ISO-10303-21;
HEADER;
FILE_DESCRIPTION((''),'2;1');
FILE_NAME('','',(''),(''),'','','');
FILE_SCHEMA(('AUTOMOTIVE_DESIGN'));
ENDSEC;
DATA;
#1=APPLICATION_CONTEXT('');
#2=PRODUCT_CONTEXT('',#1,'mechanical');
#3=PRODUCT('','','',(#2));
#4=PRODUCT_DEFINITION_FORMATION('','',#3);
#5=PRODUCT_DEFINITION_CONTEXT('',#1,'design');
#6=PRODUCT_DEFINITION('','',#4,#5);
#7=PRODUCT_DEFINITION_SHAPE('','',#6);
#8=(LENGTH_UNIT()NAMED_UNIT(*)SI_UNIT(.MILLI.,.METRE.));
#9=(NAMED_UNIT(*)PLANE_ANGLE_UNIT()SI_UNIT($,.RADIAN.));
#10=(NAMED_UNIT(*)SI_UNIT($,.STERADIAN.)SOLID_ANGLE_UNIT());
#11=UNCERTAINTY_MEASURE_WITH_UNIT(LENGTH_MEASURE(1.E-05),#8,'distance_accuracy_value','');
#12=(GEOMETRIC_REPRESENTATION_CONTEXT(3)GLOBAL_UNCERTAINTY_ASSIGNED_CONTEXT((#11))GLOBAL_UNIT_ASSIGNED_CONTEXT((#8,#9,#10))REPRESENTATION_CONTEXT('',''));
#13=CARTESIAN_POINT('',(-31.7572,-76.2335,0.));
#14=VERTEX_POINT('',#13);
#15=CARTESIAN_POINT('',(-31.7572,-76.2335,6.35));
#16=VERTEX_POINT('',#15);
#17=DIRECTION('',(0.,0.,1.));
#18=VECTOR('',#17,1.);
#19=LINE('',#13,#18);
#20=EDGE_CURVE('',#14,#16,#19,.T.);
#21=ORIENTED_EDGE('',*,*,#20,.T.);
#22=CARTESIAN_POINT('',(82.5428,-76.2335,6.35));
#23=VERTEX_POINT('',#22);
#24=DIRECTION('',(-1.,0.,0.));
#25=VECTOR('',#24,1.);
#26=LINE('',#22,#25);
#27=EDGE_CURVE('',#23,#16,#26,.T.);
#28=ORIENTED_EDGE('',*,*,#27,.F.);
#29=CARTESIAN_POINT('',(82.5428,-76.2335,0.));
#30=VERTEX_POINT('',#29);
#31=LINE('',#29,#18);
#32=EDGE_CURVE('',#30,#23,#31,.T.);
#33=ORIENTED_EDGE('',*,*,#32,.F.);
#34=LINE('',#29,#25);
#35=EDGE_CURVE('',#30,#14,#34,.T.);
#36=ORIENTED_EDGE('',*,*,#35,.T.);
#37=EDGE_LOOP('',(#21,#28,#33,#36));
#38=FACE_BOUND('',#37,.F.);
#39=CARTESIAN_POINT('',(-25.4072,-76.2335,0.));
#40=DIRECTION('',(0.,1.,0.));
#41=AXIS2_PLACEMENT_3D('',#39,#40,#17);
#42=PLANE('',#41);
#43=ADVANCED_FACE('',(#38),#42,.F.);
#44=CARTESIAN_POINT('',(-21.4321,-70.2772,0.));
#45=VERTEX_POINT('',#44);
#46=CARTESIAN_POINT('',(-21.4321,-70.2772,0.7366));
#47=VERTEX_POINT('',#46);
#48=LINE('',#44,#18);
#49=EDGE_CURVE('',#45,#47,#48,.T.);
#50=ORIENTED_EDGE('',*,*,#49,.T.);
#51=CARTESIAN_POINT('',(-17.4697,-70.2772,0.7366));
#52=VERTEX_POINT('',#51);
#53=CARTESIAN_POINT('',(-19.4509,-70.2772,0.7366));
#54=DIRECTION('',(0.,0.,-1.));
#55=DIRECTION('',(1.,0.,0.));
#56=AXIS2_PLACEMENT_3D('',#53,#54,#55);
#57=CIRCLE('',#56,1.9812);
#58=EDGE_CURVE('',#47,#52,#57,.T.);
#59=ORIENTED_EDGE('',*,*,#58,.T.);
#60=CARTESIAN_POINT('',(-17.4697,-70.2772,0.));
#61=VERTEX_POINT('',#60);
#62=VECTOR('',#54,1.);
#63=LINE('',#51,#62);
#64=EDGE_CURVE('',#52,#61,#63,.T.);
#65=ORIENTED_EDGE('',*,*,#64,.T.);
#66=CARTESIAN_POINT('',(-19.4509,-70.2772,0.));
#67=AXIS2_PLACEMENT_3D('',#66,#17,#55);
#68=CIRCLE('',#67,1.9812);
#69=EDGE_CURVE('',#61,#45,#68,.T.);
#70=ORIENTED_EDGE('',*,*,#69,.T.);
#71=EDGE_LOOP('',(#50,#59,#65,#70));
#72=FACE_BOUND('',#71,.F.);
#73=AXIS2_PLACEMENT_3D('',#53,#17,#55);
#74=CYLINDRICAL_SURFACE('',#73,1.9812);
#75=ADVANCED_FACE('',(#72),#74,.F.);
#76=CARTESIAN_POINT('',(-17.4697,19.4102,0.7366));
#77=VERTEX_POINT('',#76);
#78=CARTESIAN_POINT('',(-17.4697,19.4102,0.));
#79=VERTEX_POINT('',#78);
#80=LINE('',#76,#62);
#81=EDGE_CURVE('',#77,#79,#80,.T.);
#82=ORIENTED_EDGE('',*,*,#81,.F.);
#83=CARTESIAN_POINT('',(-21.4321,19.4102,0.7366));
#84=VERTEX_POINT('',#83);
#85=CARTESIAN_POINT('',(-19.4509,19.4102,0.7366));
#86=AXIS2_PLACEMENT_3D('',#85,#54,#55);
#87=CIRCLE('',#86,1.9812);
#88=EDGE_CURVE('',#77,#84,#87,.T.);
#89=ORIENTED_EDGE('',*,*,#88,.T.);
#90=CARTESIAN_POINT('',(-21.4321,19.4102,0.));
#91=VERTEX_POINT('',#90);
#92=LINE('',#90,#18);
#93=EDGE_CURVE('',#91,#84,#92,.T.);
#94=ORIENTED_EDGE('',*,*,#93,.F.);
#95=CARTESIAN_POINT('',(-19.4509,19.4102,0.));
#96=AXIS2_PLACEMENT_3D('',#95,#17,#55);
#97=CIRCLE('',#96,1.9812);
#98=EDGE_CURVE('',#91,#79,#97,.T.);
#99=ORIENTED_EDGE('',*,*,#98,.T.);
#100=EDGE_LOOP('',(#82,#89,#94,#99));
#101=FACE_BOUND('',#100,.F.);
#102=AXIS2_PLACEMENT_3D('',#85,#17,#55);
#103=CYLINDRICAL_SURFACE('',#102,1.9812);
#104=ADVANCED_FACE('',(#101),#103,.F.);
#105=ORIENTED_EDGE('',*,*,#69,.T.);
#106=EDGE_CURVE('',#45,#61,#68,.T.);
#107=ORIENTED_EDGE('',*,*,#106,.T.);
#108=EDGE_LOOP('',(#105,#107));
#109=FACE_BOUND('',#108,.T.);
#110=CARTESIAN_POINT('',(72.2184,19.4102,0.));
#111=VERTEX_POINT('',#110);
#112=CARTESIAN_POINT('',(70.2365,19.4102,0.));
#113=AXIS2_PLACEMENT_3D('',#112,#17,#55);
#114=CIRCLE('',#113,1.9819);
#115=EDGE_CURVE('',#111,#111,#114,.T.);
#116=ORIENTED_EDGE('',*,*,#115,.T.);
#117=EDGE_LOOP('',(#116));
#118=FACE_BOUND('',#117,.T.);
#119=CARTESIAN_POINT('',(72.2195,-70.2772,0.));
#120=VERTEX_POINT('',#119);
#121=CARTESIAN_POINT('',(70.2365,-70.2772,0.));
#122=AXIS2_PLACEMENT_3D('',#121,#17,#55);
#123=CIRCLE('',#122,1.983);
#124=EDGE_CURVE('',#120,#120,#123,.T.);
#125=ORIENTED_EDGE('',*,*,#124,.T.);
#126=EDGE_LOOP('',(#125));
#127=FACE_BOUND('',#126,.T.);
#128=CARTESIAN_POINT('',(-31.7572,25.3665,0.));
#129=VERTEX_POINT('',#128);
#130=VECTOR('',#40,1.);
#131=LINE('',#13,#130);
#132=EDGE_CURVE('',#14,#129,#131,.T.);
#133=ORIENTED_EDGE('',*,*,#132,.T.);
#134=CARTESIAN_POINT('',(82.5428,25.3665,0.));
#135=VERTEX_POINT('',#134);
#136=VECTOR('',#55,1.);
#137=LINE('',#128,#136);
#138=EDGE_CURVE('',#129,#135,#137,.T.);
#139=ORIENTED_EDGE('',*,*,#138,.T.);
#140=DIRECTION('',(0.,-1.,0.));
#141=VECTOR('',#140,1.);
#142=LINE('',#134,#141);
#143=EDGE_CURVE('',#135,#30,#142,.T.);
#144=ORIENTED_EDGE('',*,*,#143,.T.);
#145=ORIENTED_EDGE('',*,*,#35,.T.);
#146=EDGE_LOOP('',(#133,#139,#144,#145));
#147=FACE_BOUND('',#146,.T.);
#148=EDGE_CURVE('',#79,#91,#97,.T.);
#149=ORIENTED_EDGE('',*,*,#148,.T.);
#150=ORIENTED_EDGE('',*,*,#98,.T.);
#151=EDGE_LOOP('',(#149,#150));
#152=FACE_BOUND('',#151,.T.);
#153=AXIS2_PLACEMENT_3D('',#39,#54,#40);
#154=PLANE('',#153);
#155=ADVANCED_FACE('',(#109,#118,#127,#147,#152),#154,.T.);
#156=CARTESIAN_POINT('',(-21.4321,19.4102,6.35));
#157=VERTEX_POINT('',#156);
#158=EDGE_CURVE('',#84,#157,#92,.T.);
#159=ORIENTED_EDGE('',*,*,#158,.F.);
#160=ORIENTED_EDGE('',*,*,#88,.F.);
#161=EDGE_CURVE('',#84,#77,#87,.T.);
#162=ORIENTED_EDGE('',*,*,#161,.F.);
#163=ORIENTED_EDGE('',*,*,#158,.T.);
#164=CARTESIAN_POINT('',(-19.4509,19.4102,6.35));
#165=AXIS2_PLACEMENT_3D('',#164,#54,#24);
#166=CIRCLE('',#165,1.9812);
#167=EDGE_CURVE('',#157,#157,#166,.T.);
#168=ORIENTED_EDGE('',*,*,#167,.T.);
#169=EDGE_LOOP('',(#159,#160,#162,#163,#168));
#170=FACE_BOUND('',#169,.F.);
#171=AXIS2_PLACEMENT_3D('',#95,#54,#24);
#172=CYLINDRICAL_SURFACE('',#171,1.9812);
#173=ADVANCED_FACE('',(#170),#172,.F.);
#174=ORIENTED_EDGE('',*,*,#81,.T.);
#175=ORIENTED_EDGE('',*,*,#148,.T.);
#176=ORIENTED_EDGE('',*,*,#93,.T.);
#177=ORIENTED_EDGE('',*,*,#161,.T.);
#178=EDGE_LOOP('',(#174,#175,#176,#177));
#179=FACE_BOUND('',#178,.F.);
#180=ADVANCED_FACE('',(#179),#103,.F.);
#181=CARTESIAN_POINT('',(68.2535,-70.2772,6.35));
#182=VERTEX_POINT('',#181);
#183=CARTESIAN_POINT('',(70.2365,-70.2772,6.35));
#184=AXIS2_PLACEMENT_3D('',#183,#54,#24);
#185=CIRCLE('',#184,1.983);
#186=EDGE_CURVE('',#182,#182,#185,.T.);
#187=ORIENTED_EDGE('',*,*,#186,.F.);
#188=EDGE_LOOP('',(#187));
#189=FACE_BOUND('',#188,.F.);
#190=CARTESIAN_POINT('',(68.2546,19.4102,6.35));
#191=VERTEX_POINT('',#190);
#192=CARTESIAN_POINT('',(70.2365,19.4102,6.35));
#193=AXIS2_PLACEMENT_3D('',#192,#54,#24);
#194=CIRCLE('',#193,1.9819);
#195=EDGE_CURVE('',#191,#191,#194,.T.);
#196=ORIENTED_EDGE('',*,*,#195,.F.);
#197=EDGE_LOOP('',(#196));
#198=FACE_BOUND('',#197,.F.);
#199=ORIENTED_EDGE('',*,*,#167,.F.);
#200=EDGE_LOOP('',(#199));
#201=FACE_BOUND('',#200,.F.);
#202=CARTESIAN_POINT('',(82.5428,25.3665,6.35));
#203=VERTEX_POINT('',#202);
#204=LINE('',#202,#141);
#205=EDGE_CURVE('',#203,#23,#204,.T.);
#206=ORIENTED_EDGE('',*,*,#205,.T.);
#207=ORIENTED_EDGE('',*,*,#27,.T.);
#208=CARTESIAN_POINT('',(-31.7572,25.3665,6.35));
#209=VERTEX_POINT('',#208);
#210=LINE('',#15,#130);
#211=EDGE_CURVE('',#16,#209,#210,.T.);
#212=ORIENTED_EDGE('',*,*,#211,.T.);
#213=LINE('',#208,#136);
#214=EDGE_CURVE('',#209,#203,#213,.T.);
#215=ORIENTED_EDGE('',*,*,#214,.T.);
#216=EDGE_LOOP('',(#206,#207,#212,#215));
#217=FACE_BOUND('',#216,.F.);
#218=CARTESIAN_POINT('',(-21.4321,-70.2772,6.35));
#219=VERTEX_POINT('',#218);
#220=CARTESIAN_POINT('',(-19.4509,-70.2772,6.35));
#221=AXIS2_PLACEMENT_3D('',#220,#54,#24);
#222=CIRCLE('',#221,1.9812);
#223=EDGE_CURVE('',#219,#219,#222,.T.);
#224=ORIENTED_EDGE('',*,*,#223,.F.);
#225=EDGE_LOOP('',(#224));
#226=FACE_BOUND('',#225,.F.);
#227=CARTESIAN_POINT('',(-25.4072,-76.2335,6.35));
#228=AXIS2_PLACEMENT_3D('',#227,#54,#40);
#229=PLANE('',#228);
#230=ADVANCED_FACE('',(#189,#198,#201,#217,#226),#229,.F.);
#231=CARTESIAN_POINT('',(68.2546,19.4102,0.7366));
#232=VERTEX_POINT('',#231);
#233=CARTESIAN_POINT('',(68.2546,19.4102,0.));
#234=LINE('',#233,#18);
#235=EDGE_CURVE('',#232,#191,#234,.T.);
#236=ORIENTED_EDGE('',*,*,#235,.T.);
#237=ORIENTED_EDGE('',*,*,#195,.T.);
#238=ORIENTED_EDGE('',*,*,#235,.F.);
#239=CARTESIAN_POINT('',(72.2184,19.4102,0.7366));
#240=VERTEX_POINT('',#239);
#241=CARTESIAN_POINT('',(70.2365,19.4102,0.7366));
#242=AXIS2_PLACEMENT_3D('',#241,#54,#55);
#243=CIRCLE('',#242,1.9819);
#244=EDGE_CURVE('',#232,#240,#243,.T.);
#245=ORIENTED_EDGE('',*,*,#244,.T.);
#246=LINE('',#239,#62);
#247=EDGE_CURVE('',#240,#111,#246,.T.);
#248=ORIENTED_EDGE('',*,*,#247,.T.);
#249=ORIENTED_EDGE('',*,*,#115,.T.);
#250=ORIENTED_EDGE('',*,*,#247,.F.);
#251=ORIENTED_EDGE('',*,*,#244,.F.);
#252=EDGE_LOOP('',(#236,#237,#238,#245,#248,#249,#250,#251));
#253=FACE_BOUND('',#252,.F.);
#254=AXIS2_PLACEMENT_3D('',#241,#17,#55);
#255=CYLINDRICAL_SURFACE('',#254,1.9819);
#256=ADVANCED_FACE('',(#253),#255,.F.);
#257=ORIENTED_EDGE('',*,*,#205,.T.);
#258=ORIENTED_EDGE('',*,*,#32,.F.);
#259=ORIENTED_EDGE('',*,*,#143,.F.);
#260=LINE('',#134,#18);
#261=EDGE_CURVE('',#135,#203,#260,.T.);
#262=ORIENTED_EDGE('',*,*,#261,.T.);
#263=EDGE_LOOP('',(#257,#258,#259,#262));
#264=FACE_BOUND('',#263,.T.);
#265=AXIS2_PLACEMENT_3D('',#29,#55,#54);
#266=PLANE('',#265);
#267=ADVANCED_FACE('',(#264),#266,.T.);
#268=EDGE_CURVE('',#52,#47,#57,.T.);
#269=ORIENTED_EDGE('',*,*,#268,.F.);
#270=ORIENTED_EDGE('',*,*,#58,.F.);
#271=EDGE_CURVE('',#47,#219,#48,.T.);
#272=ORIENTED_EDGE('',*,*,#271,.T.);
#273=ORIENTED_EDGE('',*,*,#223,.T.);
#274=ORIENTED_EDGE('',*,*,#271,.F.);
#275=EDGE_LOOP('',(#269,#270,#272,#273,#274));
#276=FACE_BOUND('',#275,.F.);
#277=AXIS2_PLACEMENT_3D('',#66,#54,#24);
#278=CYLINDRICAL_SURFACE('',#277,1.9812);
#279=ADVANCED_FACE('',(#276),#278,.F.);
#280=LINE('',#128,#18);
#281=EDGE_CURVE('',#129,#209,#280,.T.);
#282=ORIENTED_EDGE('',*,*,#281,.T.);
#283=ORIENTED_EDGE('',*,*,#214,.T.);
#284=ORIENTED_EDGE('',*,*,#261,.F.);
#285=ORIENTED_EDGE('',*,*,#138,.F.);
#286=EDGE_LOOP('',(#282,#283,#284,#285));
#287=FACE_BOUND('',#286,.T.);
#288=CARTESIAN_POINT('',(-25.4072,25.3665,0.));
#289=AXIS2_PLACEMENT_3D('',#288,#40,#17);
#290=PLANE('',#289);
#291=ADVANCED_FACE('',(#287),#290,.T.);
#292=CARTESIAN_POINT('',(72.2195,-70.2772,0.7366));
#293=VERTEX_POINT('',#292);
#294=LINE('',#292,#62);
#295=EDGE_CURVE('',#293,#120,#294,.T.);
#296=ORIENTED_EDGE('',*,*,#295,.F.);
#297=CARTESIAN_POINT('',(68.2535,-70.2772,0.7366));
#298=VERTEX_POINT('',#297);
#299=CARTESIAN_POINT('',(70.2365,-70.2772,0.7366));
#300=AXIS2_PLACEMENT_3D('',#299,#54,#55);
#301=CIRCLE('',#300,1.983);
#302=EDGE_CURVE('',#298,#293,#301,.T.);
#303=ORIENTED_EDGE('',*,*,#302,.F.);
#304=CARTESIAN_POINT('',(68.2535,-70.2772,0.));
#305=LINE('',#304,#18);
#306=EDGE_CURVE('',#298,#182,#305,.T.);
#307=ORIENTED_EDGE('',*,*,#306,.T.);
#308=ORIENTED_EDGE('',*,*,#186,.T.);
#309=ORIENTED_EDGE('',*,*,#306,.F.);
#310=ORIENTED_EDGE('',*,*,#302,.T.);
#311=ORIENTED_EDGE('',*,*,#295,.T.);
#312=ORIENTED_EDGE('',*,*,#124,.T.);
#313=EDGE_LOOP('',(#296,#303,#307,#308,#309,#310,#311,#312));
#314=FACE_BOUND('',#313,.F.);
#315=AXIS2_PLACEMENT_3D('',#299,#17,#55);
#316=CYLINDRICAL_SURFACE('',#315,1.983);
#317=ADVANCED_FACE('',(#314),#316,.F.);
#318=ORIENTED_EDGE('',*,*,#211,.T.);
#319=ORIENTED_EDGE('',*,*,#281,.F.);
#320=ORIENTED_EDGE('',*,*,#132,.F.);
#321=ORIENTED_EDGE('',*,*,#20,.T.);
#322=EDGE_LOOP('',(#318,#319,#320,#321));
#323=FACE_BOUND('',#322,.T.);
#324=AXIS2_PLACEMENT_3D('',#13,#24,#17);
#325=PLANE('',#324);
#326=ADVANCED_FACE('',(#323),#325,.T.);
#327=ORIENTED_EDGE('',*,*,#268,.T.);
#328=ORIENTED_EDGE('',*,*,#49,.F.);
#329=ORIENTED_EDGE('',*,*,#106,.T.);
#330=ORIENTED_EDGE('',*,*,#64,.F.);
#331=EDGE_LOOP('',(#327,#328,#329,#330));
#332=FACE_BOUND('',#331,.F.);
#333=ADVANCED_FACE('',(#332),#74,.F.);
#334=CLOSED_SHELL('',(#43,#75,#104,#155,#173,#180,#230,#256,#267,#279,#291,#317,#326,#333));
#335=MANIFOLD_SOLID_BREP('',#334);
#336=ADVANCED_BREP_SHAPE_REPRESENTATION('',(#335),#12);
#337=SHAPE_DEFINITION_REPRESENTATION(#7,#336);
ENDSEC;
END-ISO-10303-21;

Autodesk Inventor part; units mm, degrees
ref_plane "YZ Plane" through (0, 0, 0) normal (1, 0, 0) x (0, 1, 0)
ref_plane "XZ Plane" through (0, 0, 0) normal (0, 1, 0) x (-1, 0, 0)
ref_plane "XY Plane" through (0, 0, 0) normal (0, 0, 1) x (1, 0, 0)
sketch "Sketch1" plane through (0, 0, 0) normal (0, 0, 1) x (1, 0, 0)
  line L0 (-25.4072, 25.3665) -> (76.1928, 25.3665)
  line L1 (76.1928, 25.3665) -> (76.1928, -76.2335)
  line L2 (76.1928, -76.2335) -> (-25.4072, -76.2335)
  line L3 (-25.4072, -76.2335) -> (-25.4072, 25.3665)
  point P0 (0, 0)
  dimension "d0" = 101.6
  dimension "d1" = 101.6
extrude "Extrusion1" add sketch "Sketch1" along normal blind 0.7366
sketch "Sketch2" plane through (0, 0, 0.7366) normal (0, 0, 1) x (1, 0, 0)
  line L0 (-25.4072, 25.3665) -> (76.1928, -76.2335)
  line L1 (76.1928, 25.3665) -> (-25.4072, -76.2335)
  circle A0 centre (25.3928, -25.4335) radius 27.432
  point P0 (0, 0)
  dimension "d4" = 54.864
extrude "Extrusion2" cut sketch "Sketch2" against normal blind 0.7366
sketch "Sketch3" plane through (0, 0, 0.7366) normal (0, 0, 1) x (1, 0, 0)
  line L0 (-25.4072, -76.2335) -> (-25.4072, 25.3665) projected
  line L1 (-25.4072, 25.3665) -> (-25.4072, -25.4335)
  line L2 (-25.4072, -25.4335) -> (-25.4072, 19.4102)
  line L3 (-25.4072, 25.3665) -> (76.1928, -76.2335)
  line L4 (76.1928, 25.3665) -> (-25.4072, -76.2335)
  circle A0 centre (-19.4509, 19.4102) radius 1.9812
  point P0 (0, 0)
  dimension "d7" = 44.8437
  dimension "d8" = 3.9624
extrude "Extrusion3" cut sketch "Sketch3" against normal blind 0.7366 contours A0 L3 | L3 A0
sketch "Sketch4" plane through (0, 0, 0.7366) normal (0, 0, 1) x (1, 0, 0)
  line L0 (-25.4072, -76.2335) -> (76.1928, 25.3665)
  line L1 (-25.4072, 25.3665) -> (76.1928, -76.2335)
  circle A0 centre (70.2365, 19.4102) radius 1.9819
  circle A1 centre (70.2365, -70.2772) radius 1.983
  circle A2 centre (-19.4509, -70.2772) radius 1.9812
  point P0 (0, 0)
extrude "Extrusion4" cut sketch "Sketch4" against normal blind 0.7366
sketch "Sketch5" plane through (0, 0, 0.7366) normal (0, 0, 1) x (1, 0, 0)
  circle A0 centre (25.3928, -25.4335) radius 27.432 projected
  circle A1 centre (25.3928, -25.4335) radius 29.972
  circle A2 centre (25.3928, -25.4335) radius 32.512
  point P0 (0, 0)
  dimension "d13" = 59.944
  dimension "d14" = 65.024
extrude "Extrusion5" add sketch "Sketch5" along normal blind 6.6548 contours A2
fillet "Fillet1" radius 3.175 4 edges at (-25.4072, 25.3665, 0.3683) (76.1928, 25.3665, 0.3683) (76.1928, -76.2335, 0.3683) (-25.4072, -76.2335, 0.3683)
sketch "Sketch6" plane through (0, 0, 0) normal (0, 0, -1) x (-1, 0, 0)
  circle A0 centre (-70.2365, 19.4102) radius 1.9819 projected
  circle A1 centre (19.4509, -70.2772) radius 1.9812 projected
  circle A2 centre (-70.2365, -70.2772) radius 1.983 projected
  circle A3 centre (19.4509, 19.4102) radius 1.9812 projected
  line L0 (-76.1928, 25.3665) -> (25.4072, 25.3665)
  line L1 (25.4072, 25.3665) -> (25.4072, -76.2335)
  line L2 (25.4072, -76.2335) -> (-76.1928, -76.2335)
  line L3 (-76.1928, -76.2335) -> (-76.1928, 25.3665)
  point P0 (0, 0)
extrude "Extrusion6" add sketch "Sketch6" against normal blind 6.35
sketch "Sketch7" plane through (0, 0, 6.35) normal (0, 0, 1) x (1, 0, 0)
  line L0 (-14.3145, 13.5707) -> (65.0173, 13.5707)
  line L1 (65.0173, 13.5707) -> (65.0173, -65.16)
  line L2 (65.0173, -65.16) -> (-14.3145, -65.16)
  line L3 (-14.3145, -65.16) -> (-14.3145, 13.5707)
  point P0 (0, 0)
extrude "Extrusion7" cut sketch "Sketch7" along normal blind 6.35
sketch "Sketch8" plane through (0, 0, 6.35) normal (0, 0, 1) x (1, 0, 0)
  circle A0 centre (70.2365, -70.2772) radius 1.983 projected
  circle A1 centre (-19.4509, 19.4102) radius 1.9812 projected
  line L0 (-19.4509, 19.4102) -> (70.2365, 19.4102)
  line L1 (70.2365, 19.4102) -> (70.2365, -70.2772)
  line L2 (70.2365, -70.2772) -> (-19.4509, -70.2772)
  line L3 (-19.4509, -70.2772) -> (-19.4509, 19.4102)
  line L4 (63.8865, 13.0602) -> (-13.1009, 13.0602)
  line L5 (-13.1009, 13.0602) -> (-13.1009, -63.9272)
  line L6 (-13.1009, -63.9272) -> (63.8865, -63.9272)
  line L7 (63.8865, -63.9272) -> (63.8865, 13.0602)
  line L8 (-13.1009, -25.4335) -> (-13.1009, -19.0835)
  line L9 (-13.1009, -19.0835) -> (63.8865, -19.0835)
  line L10 (63.8865, -19.0835) -> (63.8865, -31.7835)
  line L11 (63.8865, -31.7835) -> (-13.1009, -31.7835)
  point P0 (0, 0)
  dimension "d22" = 6.35
  dimension "d23" = 6.35
  dimension "d24" = 12.7
extrude "Extrusion8" cut sketch "Sketch8" against normal blind 25.4 contours L7 L9 L5 L4 | L7 L6 L5 L11
sketch "Sketch9" plane through (0, 0, 6.35) normal (0, 0, 1) x (1, 0, 0)
  line L0 (63.8865, -63.9272) -> (-13.1009, -63.9272) projected
  line L1 (-13.1009, 13.0602) -> (63.8865, 13.0602) projected
  line L2 (-25.4072, 25.3665) -> (76.1928, 25.3665) projected
  line L3 (76.1928, -76.2335) -> (-25.4072, -76.2335) projected
  line L4 (-13.1009, 13.0602) -> (-13.1009, 25.3665)
  line L5 (63.8865, 13.0602) -> (63.8865, 25.3665)
  line L6 (63.8865, -63.9272) -> (63.8865, -76.2335)
  line L7 (-13.1009, -63.9272) -> (-13.1009, -76.2335)
  point P0 (0, 0)
extrude "Extrusion9" cut sketch "Sketch9" against normal blind 25.4
sketch "Sketch10" plane through (0, 0, 6.35) normal (0, 0, 1) x (1, 0, 0)
  line L0 (-13.1009, 25.3665) -> (63.8865, 25.3665)
  line L1 (63.8865, 25.3665) -> (63.8865, -76.2335)
  line L2 (63.8865, -76.2335) -> (-13.1009, -76.2335)
  line L3 (-13.1009, -76.2335) -> (-13.1009, 25.3665)
  point P0 (0, 0)
extrude "Extrusion10" add sketch "Sketch10" against normal blind 6.35
sketch "Sketch11" plane through (76.1928, -76.2335, 0) normal (1, 0, 0) x (0, 0, -1)
  line L0 (0, 101.6) -> (0, 0) projected
  line L1 (0, 101.6) -> (-6.35, 101.6) projected
  line L2 (-6.35, 101.6) -> (-6.35, 0) projected
  line L3 (0, 0) -> (-6.35, 0) projected
  point P0 (0, 76.2335)
extrude "Extrusion11" add sketch "Sketch11" along normal blind 6.35
sketch "Sketch12" plane through (-25.4072, -76.2335, 0) normal (-1, 0, 0) x (0, 0, 1)
  line L0 (0, 0) -> (0, 101.6) projected
  line L1 (0, 0) -> (6.35, 0) projected
  line L2 (6.35, 0) -> (6.35, 101.6) projected
  line L3 (0, 101.6) -> (6.35, 101.6) projected
  point P0 (0, 76.2335)
extrude "Extrusion12" add sketch "Sketch12" along normal blind 6.35
properties part number "tb2"
